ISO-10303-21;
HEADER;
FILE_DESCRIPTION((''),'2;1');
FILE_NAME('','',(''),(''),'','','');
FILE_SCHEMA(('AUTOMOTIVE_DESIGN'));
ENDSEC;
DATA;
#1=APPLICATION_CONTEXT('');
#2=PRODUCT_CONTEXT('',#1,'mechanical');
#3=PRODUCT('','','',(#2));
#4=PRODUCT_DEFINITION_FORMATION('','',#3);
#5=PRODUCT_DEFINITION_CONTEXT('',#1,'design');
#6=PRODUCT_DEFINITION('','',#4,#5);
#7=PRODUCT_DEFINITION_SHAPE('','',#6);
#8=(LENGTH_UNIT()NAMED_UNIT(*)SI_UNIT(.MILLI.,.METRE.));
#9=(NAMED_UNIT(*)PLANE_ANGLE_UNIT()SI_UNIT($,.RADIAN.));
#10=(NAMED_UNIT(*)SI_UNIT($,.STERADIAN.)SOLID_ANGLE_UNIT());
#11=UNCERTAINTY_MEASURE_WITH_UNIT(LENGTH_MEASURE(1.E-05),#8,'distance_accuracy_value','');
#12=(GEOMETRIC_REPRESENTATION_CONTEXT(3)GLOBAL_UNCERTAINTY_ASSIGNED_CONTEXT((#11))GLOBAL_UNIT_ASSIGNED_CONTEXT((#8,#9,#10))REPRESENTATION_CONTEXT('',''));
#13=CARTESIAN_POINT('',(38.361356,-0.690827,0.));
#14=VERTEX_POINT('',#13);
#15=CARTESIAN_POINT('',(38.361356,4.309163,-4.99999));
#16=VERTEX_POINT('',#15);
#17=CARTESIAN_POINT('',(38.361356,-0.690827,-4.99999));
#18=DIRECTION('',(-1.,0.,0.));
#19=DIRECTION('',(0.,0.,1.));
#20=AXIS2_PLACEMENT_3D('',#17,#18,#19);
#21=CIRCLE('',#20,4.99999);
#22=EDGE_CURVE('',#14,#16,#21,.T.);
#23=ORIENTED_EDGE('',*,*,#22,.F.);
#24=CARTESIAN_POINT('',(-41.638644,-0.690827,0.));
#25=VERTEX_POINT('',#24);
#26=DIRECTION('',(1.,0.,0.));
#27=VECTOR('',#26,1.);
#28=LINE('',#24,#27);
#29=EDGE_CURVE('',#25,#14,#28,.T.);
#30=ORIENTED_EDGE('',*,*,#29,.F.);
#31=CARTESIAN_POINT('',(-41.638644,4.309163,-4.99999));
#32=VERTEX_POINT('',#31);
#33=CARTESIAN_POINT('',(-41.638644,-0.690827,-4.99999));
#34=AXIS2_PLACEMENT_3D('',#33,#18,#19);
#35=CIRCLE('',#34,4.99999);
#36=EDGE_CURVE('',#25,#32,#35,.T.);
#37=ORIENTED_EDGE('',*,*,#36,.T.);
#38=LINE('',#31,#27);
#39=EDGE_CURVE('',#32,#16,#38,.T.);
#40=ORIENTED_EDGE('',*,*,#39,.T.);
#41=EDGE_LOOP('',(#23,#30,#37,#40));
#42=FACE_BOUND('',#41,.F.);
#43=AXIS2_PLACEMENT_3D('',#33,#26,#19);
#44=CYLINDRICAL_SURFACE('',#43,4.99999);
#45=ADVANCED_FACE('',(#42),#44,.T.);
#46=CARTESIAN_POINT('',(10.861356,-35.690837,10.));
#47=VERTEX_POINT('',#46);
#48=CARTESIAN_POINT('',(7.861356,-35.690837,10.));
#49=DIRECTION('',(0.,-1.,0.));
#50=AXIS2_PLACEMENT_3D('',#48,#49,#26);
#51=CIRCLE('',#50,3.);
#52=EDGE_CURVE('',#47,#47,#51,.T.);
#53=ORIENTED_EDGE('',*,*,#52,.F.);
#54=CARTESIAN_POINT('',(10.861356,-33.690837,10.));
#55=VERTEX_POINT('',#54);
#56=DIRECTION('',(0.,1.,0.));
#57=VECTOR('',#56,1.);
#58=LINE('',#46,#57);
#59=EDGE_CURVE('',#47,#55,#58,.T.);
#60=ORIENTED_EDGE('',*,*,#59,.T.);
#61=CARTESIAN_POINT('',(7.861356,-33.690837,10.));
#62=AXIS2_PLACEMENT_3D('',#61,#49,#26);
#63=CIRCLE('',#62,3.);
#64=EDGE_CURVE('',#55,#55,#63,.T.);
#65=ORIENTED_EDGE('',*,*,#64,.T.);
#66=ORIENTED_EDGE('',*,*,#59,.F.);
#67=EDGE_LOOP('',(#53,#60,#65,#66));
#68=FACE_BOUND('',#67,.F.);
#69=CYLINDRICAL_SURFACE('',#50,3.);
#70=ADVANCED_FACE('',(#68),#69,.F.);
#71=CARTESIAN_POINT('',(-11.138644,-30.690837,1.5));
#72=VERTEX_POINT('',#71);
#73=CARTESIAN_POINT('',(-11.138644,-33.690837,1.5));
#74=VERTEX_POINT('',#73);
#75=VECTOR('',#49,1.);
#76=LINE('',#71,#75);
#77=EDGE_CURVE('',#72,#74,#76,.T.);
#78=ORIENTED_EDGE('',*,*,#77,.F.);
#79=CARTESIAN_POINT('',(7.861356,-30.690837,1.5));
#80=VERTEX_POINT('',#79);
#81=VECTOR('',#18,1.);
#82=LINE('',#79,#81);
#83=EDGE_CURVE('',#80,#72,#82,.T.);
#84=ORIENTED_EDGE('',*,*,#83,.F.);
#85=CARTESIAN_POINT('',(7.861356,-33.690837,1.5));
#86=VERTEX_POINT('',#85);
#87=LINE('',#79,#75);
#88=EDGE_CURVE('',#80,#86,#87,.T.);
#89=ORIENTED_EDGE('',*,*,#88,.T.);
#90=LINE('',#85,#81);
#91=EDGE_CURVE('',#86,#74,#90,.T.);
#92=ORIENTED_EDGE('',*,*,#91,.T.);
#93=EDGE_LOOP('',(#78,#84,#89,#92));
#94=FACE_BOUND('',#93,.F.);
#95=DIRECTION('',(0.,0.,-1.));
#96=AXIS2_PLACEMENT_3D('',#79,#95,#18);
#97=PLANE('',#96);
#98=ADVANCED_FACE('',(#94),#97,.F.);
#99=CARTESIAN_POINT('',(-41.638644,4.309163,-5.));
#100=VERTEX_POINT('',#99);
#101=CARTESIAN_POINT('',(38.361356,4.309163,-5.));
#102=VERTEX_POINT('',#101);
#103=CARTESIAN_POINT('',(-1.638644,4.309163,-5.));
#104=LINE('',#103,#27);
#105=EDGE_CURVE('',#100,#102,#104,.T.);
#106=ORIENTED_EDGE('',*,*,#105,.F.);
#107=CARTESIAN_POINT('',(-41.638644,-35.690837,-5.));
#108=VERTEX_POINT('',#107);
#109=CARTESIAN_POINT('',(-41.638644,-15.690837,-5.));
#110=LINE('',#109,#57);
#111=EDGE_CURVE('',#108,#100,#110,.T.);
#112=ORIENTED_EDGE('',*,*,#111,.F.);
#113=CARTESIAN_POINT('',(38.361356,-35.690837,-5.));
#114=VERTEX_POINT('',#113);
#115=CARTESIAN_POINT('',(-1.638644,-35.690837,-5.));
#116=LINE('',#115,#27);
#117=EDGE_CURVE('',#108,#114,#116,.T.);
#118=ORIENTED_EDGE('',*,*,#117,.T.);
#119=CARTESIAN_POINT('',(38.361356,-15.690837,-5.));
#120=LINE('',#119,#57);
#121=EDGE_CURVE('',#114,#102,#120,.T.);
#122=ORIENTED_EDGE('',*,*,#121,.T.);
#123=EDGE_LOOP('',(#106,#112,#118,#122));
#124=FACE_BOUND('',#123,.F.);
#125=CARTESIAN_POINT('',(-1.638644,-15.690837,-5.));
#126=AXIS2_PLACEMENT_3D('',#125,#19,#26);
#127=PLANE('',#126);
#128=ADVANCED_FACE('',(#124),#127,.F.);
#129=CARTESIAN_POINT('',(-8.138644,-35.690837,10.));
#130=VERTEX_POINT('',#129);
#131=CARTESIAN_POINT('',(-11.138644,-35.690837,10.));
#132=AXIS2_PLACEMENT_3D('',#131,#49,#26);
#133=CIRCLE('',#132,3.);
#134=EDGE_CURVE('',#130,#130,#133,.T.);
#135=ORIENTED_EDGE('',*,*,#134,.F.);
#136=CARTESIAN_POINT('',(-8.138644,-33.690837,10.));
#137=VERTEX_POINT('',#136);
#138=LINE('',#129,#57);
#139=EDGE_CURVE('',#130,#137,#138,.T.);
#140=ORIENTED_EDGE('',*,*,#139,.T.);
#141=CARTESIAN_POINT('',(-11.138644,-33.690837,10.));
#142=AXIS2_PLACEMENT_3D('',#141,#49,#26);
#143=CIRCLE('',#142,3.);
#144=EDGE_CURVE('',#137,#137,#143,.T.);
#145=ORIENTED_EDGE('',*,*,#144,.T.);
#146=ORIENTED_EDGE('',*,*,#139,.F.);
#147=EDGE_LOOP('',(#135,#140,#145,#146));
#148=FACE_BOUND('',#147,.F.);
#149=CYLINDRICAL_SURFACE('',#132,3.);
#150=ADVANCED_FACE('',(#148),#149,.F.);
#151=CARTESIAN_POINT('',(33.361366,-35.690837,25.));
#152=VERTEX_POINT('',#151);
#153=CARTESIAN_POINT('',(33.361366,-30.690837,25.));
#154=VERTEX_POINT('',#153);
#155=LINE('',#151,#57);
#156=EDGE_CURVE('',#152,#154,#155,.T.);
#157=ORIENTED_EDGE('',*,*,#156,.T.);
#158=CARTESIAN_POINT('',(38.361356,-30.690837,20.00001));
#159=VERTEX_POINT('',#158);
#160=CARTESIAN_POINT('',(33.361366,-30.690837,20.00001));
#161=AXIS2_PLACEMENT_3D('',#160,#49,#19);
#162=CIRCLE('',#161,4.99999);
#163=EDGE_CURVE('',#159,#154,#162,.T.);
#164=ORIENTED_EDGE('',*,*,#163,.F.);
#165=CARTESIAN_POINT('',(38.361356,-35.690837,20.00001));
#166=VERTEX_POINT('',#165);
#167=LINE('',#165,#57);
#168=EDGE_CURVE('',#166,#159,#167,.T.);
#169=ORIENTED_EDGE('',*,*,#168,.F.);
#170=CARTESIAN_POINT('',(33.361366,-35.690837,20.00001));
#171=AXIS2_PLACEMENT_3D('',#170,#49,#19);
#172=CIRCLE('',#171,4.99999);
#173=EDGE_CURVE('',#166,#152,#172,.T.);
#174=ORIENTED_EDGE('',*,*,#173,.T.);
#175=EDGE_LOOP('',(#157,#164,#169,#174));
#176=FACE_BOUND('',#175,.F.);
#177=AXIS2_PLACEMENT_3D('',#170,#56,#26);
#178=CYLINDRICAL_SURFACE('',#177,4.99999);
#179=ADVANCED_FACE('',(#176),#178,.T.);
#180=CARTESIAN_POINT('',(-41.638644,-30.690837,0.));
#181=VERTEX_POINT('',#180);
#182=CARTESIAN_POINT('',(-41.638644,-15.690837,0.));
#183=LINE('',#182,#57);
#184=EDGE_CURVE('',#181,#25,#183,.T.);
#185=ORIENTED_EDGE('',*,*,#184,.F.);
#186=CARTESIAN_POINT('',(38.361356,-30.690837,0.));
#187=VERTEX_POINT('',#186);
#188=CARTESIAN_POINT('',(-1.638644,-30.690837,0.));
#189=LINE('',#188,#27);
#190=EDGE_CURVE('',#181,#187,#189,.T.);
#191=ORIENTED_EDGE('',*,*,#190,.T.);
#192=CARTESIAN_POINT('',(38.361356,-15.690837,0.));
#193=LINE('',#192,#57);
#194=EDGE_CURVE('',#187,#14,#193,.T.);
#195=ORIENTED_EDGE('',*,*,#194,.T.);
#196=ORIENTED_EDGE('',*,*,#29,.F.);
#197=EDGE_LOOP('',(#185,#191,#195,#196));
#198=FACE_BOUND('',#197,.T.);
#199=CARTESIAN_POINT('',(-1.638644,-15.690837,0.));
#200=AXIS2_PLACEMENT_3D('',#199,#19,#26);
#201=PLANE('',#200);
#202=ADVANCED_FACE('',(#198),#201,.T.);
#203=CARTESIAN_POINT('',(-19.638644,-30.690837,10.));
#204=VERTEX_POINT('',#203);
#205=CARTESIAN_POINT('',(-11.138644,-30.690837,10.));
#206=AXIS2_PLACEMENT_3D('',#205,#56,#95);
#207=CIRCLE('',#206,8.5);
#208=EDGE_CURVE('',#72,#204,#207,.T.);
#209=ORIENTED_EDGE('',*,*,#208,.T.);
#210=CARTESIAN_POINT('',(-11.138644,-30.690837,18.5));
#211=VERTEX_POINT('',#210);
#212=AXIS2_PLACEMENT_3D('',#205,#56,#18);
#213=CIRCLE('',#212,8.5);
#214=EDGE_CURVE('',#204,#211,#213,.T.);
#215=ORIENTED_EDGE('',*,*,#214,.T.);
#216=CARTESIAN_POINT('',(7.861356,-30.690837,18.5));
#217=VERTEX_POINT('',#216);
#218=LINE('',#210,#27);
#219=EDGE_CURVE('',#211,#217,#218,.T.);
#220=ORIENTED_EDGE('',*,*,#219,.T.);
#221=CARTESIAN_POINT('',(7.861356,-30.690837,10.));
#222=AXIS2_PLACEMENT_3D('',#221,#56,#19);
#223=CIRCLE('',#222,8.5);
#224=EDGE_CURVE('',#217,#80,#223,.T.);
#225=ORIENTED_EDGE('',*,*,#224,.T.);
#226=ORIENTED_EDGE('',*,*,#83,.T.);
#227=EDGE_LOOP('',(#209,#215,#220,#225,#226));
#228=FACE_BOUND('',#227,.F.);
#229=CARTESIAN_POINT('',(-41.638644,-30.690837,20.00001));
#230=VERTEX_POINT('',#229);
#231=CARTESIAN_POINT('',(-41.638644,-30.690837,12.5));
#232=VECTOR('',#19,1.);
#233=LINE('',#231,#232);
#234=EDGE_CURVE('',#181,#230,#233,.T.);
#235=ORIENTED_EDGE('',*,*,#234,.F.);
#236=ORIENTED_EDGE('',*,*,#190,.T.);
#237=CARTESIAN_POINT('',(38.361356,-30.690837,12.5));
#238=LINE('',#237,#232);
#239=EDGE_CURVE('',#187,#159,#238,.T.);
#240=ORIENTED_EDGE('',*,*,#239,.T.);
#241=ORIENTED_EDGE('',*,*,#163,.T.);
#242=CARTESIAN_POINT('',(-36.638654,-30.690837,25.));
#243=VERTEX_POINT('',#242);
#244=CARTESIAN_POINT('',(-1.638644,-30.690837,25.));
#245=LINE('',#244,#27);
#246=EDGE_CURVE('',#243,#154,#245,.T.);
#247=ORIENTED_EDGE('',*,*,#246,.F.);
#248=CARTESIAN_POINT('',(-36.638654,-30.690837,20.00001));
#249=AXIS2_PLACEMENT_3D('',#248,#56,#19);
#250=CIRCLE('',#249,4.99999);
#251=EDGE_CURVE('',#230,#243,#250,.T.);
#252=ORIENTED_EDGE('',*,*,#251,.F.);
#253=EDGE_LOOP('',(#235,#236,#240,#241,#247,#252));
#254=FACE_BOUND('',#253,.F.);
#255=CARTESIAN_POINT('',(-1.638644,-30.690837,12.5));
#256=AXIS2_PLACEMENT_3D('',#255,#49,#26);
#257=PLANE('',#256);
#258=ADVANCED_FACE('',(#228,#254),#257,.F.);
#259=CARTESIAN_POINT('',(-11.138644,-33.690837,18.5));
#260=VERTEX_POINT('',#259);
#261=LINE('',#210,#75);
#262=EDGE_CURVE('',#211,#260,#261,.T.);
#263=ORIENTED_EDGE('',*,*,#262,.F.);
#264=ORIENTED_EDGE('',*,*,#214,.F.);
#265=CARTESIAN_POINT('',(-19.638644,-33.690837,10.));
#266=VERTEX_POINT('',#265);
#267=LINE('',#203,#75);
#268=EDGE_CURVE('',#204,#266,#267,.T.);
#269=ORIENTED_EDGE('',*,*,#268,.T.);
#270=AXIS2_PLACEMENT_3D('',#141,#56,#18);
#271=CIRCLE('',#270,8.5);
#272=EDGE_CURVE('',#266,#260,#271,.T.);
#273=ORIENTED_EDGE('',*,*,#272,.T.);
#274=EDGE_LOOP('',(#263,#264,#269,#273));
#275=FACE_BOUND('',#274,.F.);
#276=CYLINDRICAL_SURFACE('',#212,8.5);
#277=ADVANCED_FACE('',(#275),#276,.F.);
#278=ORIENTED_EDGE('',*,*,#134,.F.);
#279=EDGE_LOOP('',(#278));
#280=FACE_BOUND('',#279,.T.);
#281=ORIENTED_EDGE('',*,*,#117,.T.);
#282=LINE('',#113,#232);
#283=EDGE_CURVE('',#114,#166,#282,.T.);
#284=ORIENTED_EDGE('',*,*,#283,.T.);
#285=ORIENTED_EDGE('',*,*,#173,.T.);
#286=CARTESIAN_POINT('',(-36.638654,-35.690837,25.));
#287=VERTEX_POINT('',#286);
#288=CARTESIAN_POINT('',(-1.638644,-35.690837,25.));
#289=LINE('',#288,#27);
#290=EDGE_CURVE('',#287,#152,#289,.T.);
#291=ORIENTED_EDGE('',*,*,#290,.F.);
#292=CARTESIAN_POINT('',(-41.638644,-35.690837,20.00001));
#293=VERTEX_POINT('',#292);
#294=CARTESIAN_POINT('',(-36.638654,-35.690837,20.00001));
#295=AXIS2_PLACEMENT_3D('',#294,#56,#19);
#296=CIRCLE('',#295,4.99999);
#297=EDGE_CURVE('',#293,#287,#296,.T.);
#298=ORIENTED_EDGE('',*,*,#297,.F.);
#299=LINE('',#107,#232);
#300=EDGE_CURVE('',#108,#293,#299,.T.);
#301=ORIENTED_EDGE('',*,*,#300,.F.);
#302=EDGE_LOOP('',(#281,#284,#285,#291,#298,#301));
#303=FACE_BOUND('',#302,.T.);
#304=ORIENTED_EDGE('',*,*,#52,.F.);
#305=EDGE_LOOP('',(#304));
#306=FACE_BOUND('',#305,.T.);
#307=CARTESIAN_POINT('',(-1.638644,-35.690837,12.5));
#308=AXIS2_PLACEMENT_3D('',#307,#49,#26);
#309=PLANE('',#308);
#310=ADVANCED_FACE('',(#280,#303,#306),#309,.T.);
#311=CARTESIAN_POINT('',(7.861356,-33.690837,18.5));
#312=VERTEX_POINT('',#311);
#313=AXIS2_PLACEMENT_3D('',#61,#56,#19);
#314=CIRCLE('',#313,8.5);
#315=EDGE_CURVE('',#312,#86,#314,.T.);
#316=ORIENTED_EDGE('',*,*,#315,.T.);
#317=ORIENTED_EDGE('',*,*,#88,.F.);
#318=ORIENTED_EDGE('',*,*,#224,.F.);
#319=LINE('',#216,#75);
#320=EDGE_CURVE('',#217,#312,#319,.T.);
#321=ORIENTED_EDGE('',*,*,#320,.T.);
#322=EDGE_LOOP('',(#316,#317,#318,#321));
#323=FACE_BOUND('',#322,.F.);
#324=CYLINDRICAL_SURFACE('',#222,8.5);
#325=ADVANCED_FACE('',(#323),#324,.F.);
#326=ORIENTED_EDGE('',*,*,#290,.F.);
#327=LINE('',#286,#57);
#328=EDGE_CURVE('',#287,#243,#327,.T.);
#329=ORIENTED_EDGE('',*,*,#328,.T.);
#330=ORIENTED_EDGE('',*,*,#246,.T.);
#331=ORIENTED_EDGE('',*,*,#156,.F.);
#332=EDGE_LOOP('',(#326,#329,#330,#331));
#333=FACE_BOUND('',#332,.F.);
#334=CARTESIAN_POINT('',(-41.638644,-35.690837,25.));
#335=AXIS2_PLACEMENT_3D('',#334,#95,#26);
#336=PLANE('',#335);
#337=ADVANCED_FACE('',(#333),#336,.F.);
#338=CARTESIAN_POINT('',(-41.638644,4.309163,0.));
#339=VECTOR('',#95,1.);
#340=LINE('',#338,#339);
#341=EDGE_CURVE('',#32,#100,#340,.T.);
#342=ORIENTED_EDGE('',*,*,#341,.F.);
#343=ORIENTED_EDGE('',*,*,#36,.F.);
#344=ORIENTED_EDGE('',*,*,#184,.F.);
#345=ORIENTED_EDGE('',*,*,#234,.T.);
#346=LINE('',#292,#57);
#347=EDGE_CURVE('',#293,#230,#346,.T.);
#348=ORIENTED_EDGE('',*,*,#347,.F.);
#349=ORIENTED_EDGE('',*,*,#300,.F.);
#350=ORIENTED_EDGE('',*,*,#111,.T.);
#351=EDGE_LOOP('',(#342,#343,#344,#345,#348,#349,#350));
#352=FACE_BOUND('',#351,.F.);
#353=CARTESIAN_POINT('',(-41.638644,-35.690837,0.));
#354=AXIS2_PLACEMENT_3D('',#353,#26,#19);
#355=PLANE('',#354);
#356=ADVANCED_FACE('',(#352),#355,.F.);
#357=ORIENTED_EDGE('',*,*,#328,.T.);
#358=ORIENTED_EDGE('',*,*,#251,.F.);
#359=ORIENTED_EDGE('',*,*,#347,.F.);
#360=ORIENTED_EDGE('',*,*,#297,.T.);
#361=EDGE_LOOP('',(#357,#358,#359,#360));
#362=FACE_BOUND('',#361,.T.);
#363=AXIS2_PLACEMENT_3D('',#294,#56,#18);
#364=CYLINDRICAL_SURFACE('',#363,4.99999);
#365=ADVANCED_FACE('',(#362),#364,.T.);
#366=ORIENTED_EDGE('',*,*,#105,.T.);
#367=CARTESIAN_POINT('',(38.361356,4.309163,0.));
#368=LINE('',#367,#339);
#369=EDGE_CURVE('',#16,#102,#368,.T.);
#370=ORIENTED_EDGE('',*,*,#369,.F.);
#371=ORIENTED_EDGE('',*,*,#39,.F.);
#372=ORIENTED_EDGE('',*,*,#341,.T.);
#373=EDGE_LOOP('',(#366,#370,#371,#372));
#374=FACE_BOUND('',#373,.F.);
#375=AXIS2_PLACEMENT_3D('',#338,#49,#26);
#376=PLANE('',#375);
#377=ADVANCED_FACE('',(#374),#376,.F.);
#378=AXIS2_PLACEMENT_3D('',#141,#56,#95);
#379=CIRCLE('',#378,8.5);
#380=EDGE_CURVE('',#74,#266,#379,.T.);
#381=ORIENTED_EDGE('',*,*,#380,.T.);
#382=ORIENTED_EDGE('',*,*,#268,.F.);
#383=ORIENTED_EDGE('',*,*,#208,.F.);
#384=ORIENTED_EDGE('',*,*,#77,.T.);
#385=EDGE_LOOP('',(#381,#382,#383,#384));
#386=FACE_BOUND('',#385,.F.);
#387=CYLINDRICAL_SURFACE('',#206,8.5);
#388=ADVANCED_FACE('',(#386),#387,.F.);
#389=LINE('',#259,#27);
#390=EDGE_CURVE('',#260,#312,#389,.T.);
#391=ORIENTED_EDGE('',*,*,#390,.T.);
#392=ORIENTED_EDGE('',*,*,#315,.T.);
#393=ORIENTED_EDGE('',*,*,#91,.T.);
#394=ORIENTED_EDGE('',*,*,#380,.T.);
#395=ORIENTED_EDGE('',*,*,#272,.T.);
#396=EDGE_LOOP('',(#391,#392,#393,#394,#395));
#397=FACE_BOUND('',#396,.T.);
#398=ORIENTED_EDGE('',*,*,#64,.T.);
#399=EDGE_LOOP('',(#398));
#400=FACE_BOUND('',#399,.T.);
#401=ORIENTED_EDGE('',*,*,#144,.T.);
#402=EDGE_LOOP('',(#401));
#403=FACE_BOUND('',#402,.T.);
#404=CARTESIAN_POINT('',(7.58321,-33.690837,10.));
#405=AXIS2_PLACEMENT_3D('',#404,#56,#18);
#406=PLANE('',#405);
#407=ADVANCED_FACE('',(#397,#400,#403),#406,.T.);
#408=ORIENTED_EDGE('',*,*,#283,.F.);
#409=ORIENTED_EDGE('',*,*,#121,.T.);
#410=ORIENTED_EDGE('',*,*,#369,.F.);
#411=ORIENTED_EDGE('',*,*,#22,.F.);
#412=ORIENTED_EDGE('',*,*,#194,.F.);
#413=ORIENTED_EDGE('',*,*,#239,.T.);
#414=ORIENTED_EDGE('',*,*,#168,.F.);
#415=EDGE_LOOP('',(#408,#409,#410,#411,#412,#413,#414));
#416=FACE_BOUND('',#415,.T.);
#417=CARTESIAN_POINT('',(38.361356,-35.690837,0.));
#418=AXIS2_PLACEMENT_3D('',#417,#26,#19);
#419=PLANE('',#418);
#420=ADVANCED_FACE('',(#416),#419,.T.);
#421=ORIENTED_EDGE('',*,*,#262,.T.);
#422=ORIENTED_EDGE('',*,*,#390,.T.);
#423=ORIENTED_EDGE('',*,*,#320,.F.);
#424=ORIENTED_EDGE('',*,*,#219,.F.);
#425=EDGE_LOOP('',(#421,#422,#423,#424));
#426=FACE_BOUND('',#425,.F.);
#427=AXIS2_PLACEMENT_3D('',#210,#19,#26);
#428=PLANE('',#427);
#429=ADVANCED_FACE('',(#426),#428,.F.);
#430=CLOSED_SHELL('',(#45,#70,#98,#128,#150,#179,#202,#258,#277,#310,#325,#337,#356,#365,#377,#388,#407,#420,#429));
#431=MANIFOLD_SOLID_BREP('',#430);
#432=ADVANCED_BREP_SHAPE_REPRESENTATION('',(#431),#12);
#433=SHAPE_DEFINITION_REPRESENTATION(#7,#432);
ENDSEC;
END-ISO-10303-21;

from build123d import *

# Parameters (mm, degrees)
F0_W     = 80
F0_H     = 40
F1_DEPTH = 5
F2_W     = 80
F2_H     = 25
F2_R     = 3
F3_DEPTH = 5
F4_R     = 4.99999
F5_R     = 3
F6_DEPTH = 3


# Not quite as in the source:
# - a fillet or chamfer is up to 0.001 mm smaller than in the source, because OpenCascade refuses the exact size


with BuildPart() as f1:
    # F0 (on Top) → F1 (new body)
    with BuildSketch(Plane.XY):
        with Locations((-1.6386443377, -15.6908366084)):
            Rectangle(F0_W, F0_H)
    extrude(amount=-F1_DEPTH)

    # F2 (on face) → F3 (join)
    with BuildSketch(Plane.XZ.offset(35.6908366084)):
        with Locations((-1.6386443377, 12.5)):
            Rectangle(F2_W, F2_H)
        with Locations((-11.1386443377, 10)):
            Circle(F2_R, mode=Mode.SUBTRACT)
        with Locations((7.8613556623, 10)):
            Circle(F2_R, mode=Mode.SUBTRACT)
    extrude(amount=-F3_DEPTH)

    # F4 (radius 5 in the source; OpenCascade refuses exactly that, so slightly less here)
    f4_edges = [f1.edges().sort_by_distance(p)[0] for p in [
        (-41.638644, -33.190837, 25),
        (38.361356, -33.190837, 25),
        (-1.638644, 4.309163, 0),
    ]]
    fillet(f4_edges, radius=F4_R)

    # F5 (on face) → F6 (cut)
    with BuildSketch(Plane(origin=(0, -30.6908366084, 0), x_dir=(-1, 0, 0), z_dir=(0, 1, 0))):
        with BuildLine():
            ThreePointArc((-7.8613556623, 1.5), (-1.8509480223, 3.9895923599), (0.6386443377, 10))
            ThreePointArc((0.6386443377, 10), (-1.8509480223, 16.0104076401), (-7.8613556623, 18.5))
            ThreePointArc((-7.8613556623, 18.5), (-16.3613556623, 10), (-7.8613556623, 1.5))
        make_face()
        with Locations((-7.8613556623, 10)):
            Circle(F5_R, mode=Mode.SUBTRACT)
        with BuildLine():
            ThreePointArc((-7.8613556623, 18.5), (-1.8509480223, 16.0104076401), (0.6386443377, 10))
            ThreePointArc((0.6386443377, 10), (-1.8509480223, 3.9895923599), (-7.8613556623, 1.5))
            Line((-7.8613556623, 1.5), (11.1386443377, 1.5))
            ThreePointArc((11.1386443377, 1.5), (2.6386443377, 10), (11.1386443377, 18.5))
            Line((11.1386443377, 18.5), (-7.8613556623, 18.5))
        make_face()
        with BuildLine():
            ThreePointArc((19.6386443377, 10), (17.1490519777, 16.0104076401), (11.1386443377, 18.5))
            ThreePointArc((11.1386443377, 18.5), (2.6386443377, 10), (11.1386443377, 1.5))
            ThreePointArc((11.1386443377, 1.5), (17.1490519777, 3.9895923599), (19.6386443377, 10))
        make_face()
        with Locations((11.1386443377, 10)):
            Circle(F5_R, mode=Mode.SUBTRACT)
        with Locations((11.1386443377, 10)):
            Circle(F5_R)
        with Locations((-7.8613556623, 10)):
            Circle(F5_R)
    extrude(amount=-F6_DEPTH, mode=Mode.SUBTRACT)


solid = f1.part
